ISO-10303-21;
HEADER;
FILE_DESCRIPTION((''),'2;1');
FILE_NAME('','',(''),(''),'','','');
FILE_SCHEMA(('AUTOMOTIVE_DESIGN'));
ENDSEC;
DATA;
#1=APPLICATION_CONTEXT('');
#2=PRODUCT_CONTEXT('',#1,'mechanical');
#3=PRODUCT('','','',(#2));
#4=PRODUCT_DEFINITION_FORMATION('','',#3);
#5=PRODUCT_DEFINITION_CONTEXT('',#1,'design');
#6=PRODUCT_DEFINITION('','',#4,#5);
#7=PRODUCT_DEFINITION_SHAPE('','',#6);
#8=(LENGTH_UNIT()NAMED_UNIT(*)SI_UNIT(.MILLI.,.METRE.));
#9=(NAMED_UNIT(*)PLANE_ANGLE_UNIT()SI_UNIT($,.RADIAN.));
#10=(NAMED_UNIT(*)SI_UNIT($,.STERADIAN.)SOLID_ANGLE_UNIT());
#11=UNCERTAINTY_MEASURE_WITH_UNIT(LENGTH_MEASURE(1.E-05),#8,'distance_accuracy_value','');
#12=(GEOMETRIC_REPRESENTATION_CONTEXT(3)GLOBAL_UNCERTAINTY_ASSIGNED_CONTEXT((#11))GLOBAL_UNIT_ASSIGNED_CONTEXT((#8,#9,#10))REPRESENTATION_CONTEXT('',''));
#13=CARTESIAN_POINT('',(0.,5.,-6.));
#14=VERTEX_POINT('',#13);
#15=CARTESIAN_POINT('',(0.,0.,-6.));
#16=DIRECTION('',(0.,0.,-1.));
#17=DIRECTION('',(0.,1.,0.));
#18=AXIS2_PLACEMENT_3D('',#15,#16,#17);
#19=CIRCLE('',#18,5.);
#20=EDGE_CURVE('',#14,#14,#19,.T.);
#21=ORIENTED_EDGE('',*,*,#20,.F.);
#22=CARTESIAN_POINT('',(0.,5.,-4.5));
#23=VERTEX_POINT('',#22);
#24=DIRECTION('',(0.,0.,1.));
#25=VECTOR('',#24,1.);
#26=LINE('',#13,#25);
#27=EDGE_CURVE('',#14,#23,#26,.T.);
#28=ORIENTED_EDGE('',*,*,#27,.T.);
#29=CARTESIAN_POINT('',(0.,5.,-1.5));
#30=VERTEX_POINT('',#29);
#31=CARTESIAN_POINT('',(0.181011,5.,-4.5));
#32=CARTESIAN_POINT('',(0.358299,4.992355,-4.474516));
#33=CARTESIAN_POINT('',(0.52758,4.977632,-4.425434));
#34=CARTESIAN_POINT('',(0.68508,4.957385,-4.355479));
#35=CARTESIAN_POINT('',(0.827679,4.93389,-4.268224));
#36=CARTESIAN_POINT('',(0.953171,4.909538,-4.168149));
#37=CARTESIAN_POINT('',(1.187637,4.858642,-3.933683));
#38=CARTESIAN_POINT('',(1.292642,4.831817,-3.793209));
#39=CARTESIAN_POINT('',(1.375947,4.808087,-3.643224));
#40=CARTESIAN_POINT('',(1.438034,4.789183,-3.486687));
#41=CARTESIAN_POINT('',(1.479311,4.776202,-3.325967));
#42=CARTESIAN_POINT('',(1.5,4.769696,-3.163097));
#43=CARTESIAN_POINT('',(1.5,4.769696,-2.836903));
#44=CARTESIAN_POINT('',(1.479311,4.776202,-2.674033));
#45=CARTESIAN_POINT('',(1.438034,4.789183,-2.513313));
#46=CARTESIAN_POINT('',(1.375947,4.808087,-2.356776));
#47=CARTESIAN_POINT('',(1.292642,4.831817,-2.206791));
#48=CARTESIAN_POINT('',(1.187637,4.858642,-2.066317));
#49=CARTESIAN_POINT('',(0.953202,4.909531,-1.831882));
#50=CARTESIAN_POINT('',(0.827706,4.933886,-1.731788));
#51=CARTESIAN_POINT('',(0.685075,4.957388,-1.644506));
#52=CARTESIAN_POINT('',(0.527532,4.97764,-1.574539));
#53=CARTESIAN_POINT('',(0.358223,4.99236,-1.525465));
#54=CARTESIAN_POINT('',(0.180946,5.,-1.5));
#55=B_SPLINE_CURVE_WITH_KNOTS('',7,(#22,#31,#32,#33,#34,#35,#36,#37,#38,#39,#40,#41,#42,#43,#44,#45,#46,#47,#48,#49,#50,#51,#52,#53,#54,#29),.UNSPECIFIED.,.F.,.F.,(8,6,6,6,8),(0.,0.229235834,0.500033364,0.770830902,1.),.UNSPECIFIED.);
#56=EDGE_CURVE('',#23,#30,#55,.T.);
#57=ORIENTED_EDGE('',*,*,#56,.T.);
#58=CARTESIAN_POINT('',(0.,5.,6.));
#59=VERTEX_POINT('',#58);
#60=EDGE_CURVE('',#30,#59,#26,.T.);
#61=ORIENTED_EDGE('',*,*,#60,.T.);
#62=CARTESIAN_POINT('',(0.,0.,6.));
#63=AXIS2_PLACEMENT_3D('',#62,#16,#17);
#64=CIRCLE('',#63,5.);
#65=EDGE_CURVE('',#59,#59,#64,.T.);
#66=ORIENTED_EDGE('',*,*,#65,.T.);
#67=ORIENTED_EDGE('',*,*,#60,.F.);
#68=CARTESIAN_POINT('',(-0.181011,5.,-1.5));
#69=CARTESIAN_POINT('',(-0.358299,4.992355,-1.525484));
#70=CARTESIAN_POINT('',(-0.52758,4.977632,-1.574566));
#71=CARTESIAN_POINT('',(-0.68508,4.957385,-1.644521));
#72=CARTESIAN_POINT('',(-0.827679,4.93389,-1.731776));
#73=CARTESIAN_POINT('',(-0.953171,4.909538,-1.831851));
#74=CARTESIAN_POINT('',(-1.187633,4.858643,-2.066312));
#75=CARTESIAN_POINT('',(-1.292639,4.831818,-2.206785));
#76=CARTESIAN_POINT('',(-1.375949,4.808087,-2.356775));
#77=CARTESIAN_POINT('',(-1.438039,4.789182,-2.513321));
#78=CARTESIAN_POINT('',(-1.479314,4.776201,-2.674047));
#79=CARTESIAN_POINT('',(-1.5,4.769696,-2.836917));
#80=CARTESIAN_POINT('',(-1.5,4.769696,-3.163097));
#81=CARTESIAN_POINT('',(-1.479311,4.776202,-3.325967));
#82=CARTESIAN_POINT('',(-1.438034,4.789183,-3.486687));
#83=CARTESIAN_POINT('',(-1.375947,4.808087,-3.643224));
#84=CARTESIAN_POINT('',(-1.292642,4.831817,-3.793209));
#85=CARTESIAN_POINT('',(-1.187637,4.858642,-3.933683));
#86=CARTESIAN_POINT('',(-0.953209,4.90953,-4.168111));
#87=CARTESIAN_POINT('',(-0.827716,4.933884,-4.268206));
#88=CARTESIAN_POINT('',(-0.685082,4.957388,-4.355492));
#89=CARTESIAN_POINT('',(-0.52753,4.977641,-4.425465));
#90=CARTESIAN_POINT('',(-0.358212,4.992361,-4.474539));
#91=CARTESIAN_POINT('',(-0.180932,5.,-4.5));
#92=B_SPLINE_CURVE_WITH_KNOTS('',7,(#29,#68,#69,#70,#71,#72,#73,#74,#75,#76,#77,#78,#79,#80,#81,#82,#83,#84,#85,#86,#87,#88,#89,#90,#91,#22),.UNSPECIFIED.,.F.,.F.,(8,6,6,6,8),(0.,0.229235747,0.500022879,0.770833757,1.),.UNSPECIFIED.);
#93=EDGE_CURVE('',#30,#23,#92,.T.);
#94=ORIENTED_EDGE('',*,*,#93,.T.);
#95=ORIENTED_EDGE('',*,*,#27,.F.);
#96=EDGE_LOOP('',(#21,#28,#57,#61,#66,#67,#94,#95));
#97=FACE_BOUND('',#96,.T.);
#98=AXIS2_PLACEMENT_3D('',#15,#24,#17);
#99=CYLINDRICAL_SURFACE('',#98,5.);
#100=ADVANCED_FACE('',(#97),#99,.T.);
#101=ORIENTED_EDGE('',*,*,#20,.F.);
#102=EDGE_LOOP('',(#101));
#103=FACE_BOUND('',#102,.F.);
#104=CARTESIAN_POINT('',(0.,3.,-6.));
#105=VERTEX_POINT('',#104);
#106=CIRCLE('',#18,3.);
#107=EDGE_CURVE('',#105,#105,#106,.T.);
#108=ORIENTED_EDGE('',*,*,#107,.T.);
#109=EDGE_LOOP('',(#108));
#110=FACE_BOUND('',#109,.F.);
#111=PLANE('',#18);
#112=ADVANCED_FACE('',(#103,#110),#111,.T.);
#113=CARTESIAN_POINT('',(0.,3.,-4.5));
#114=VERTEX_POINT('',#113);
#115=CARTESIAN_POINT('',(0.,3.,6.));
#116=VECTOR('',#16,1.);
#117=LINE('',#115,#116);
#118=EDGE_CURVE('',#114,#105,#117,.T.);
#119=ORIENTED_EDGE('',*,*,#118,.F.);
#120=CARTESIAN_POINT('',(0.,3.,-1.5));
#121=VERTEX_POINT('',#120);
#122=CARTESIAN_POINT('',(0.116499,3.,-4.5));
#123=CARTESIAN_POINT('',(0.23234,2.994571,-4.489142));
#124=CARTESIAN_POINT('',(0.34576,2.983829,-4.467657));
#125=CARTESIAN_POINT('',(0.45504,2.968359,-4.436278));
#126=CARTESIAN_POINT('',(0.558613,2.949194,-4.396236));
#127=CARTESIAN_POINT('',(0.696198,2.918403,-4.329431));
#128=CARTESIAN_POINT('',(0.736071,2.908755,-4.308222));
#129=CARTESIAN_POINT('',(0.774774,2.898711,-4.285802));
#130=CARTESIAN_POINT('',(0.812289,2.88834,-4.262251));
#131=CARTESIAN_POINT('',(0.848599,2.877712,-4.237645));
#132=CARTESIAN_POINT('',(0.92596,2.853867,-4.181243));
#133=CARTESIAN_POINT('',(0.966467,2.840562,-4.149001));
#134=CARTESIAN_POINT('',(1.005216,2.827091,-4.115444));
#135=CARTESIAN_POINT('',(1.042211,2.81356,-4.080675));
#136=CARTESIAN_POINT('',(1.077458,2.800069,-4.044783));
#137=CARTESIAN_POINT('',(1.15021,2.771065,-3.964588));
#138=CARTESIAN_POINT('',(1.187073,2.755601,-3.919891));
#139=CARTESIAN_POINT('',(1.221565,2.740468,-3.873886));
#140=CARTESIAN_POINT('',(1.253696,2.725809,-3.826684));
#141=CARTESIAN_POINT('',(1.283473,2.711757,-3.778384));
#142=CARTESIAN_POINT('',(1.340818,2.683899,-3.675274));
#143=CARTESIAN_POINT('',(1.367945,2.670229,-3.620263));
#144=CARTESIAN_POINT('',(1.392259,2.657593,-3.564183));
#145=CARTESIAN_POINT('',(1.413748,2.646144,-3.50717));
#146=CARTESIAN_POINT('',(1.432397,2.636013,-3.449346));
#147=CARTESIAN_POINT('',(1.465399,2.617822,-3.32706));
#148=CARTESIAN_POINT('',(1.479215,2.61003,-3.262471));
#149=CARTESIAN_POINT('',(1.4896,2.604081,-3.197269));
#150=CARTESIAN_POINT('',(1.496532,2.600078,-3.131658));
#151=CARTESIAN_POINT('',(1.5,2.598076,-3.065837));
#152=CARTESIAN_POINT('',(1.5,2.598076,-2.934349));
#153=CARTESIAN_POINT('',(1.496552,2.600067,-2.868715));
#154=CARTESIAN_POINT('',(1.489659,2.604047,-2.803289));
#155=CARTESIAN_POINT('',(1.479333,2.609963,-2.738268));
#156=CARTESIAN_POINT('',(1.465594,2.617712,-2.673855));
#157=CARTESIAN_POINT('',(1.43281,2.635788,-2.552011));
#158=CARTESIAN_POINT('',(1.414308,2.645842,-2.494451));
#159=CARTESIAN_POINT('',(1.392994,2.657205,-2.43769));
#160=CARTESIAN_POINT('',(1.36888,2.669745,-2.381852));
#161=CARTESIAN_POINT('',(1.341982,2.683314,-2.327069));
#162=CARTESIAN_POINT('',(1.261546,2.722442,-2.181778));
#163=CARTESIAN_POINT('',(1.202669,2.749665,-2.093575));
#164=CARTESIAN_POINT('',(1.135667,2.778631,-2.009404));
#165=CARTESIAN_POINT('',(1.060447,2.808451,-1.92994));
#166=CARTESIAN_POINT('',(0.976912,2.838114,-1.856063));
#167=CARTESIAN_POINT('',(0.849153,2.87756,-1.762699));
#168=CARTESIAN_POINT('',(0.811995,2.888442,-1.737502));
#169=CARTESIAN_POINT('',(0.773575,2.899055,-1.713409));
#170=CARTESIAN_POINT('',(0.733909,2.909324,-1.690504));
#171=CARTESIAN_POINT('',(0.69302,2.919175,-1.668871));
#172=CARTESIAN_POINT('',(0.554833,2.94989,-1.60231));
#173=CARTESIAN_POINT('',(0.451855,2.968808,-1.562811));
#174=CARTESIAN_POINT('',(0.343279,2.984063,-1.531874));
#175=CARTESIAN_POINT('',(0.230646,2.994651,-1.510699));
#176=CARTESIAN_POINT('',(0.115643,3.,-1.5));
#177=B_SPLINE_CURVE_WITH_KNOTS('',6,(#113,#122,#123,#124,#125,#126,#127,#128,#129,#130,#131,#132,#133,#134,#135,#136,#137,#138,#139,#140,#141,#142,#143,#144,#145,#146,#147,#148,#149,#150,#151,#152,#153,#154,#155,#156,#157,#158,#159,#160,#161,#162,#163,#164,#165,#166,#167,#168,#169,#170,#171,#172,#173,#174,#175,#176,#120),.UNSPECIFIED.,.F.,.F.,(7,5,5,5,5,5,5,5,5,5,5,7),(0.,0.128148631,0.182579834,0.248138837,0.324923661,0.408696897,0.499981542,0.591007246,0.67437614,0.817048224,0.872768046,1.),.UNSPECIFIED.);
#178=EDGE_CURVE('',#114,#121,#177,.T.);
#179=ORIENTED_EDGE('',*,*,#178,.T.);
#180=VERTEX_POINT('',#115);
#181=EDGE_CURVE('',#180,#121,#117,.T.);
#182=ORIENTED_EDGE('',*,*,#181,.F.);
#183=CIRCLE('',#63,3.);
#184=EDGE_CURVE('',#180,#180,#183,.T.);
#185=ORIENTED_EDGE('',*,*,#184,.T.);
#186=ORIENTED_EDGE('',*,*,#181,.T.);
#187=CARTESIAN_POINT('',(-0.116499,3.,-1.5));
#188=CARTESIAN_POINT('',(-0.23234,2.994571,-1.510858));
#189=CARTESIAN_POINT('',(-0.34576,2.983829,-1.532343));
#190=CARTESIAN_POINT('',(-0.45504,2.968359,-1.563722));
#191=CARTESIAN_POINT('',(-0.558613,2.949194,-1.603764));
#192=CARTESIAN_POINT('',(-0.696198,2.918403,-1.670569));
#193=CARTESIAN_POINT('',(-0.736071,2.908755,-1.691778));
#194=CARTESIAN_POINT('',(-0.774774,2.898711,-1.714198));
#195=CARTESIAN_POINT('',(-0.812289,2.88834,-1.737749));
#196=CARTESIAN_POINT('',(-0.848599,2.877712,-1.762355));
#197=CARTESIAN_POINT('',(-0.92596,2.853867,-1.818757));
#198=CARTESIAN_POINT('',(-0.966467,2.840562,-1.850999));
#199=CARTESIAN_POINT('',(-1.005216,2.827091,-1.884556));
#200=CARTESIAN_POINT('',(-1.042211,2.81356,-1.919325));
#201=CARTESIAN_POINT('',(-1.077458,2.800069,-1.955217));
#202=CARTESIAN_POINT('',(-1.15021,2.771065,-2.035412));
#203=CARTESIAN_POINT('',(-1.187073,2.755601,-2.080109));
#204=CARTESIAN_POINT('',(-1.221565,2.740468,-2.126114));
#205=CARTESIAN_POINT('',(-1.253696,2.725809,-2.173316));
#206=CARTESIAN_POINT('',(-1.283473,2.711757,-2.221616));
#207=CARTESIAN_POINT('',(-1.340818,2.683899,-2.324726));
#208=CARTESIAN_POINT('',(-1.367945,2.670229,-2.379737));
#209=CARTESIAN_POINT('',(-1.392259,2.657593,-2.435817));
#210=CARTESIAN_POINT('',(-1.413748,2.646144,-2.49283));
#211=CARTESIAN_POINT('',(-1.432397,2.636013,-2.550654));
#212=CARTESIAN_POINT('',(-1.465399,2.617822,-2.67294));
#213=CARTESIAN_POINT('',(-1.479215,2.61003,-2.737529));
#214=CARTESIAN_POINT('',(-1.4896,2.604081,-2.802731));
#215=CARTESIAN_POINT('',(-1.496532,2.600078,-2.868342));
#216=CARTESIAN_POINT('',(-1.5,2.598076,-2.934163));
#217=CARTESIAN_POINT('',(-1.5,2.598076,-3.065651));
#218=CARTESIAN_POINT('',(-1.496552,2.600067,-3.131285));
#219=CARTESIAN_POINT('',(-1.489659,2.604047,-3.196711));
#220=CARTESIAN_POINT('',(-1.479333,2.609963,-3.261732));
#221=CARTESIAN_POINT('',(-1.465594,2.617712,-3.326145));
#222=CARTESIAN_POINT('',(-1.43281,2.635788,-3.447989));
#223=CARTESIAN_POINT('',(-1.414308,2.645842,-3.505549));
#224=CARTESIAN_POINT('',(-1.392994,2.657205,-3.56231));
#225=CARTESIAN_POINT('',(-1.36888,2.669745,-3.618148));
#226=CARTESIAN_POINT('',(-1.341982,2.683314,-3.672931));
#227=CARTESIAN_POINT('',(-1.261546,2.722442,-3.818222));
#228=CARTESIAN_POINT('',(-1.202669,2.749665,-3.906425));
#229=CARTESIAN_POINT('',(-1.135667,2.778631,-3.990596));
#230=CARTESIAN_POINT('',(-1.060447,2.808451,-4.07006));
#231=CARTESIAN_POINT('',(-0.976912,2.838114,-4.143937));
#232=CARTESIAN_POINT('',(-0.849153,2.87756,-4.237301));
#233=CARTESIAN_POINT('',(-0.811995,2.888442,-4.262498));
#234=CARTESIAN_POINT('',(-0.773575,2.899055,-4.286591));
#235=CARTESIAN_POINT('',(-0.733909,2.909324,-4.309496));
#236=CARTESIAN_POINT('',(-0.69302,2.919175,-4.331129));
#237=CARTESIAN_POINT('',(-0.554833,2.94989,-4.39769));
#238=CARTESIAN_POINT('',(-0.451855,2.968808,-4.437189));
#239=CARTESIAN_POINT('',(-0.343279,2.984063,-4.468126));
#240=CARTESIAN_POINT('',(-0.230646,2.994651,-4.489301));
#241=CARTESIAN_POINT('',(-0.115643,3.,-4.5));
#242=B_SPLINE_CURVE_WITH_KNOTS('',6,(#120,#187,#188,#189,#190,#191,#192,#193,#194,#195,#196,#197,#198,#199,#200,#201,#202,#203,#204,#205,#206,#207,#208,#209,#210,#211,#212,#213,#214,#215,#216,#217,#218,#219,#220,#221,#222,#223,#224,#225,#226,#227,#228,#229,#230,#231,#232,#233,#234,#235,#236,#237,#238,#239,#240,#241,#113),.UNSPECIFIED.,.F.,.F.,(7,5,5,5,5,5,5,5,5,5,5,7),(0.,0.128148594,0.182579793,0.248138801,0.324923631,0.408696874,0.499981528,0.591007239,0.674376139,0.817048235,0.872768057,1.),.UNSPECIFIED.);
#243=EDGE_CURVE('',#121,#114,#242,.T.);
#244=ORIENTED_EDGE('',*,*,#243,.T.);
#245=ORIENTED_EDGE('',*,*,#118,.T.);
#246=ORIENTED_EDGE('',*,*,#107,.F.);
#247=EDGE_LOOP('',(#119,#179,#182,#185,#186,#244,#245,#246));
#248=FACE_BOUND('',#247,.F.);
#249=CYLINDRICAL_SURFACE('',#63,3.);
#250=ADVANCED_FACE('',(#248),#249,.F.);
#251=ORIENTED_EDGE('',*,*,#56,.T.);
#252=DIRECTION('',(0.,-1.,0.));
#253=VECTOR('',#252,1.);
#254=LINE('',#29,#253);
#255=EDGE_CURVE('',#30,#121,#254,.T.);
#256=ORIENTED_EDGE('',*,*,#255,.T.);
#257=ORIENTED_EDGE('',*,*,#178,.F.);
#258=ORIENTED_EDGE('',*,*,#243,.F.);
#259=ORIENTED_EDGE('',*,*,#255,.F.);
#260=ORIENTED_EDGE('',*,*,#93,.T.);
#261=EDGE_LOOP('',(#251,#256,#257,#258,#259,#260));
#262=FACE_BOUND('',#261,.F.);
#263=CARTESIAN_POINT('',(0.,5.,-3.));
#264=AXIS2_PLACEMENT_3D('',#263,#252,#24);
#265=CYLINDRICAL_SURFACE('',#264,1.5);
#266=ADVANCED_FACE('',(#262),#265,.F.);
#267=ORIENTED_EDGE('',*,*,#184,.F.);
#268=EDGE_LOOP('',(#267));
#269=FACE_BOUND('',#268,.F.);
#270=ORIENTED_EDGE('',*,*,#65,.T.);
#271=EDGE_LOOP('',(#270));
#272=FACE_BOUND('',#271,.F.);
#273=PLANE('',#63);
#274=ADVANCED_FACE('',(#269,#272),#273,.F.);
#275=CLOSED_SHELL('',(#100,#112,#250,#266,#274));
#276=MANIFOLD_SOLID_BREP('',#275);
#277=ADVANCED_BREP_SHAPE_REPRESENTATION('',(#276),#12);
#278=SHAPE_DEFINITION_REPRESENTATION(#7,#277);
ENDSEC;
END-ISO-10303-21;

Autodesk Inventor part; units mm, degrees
ref_plane "YZ Plane" through (0, 0, 0) normal (1, 0, 0) x (0, 1, 0)
ref_plane "XY Plane" through (0, 0, 0) normal (0, 0, 1) x (1, 0, 0)
sketch "Esquisse1" plane through (0, 0, 0) normal (1, 0, 0) x (0, 1, 0)
  line L0 (5, 6) -> (3, 6)
  line L1 (3, 6) -> (3, -6)
  line L2 (3, -6) -> (5, -6)
  line L3 (5, -6) -> (5, 6)
  line L4 (5, 6) -> (3, -6) construction
  line L5 (3, 6) -> (5, -6) construction
  line L6 (0, 12.4388) -> (0, -12.4388)
  line L7 (0, 0) -> (14.0159, 0) construction
  point P0 (4, 0)
  dimension "d0" = 6
  dimension "d1" = 10
  dimension "d2" = 12
revolve "Révolution1" add sketch "Esquisse1" angle 360 about axis through (0, 0, 12.4388) along (0, 0, -1)
ref_plane "Plan de construction1" through (0, 5, 0) normal (0, 1, 0) x (-1, 0, 0)
sketch "Esquisse2" plane through (0, 5, 0) normal (0, 1, 0) x (-1, 0, 0)
  line L0 (0, 0) -> (0, -3) construction
  dimension "d4" = 3
hole "Perçage1" at (0, 5, -3) direction (0, -1, 0) diameter 3 end up to surface
properties part number "entretoise moteur roues"
